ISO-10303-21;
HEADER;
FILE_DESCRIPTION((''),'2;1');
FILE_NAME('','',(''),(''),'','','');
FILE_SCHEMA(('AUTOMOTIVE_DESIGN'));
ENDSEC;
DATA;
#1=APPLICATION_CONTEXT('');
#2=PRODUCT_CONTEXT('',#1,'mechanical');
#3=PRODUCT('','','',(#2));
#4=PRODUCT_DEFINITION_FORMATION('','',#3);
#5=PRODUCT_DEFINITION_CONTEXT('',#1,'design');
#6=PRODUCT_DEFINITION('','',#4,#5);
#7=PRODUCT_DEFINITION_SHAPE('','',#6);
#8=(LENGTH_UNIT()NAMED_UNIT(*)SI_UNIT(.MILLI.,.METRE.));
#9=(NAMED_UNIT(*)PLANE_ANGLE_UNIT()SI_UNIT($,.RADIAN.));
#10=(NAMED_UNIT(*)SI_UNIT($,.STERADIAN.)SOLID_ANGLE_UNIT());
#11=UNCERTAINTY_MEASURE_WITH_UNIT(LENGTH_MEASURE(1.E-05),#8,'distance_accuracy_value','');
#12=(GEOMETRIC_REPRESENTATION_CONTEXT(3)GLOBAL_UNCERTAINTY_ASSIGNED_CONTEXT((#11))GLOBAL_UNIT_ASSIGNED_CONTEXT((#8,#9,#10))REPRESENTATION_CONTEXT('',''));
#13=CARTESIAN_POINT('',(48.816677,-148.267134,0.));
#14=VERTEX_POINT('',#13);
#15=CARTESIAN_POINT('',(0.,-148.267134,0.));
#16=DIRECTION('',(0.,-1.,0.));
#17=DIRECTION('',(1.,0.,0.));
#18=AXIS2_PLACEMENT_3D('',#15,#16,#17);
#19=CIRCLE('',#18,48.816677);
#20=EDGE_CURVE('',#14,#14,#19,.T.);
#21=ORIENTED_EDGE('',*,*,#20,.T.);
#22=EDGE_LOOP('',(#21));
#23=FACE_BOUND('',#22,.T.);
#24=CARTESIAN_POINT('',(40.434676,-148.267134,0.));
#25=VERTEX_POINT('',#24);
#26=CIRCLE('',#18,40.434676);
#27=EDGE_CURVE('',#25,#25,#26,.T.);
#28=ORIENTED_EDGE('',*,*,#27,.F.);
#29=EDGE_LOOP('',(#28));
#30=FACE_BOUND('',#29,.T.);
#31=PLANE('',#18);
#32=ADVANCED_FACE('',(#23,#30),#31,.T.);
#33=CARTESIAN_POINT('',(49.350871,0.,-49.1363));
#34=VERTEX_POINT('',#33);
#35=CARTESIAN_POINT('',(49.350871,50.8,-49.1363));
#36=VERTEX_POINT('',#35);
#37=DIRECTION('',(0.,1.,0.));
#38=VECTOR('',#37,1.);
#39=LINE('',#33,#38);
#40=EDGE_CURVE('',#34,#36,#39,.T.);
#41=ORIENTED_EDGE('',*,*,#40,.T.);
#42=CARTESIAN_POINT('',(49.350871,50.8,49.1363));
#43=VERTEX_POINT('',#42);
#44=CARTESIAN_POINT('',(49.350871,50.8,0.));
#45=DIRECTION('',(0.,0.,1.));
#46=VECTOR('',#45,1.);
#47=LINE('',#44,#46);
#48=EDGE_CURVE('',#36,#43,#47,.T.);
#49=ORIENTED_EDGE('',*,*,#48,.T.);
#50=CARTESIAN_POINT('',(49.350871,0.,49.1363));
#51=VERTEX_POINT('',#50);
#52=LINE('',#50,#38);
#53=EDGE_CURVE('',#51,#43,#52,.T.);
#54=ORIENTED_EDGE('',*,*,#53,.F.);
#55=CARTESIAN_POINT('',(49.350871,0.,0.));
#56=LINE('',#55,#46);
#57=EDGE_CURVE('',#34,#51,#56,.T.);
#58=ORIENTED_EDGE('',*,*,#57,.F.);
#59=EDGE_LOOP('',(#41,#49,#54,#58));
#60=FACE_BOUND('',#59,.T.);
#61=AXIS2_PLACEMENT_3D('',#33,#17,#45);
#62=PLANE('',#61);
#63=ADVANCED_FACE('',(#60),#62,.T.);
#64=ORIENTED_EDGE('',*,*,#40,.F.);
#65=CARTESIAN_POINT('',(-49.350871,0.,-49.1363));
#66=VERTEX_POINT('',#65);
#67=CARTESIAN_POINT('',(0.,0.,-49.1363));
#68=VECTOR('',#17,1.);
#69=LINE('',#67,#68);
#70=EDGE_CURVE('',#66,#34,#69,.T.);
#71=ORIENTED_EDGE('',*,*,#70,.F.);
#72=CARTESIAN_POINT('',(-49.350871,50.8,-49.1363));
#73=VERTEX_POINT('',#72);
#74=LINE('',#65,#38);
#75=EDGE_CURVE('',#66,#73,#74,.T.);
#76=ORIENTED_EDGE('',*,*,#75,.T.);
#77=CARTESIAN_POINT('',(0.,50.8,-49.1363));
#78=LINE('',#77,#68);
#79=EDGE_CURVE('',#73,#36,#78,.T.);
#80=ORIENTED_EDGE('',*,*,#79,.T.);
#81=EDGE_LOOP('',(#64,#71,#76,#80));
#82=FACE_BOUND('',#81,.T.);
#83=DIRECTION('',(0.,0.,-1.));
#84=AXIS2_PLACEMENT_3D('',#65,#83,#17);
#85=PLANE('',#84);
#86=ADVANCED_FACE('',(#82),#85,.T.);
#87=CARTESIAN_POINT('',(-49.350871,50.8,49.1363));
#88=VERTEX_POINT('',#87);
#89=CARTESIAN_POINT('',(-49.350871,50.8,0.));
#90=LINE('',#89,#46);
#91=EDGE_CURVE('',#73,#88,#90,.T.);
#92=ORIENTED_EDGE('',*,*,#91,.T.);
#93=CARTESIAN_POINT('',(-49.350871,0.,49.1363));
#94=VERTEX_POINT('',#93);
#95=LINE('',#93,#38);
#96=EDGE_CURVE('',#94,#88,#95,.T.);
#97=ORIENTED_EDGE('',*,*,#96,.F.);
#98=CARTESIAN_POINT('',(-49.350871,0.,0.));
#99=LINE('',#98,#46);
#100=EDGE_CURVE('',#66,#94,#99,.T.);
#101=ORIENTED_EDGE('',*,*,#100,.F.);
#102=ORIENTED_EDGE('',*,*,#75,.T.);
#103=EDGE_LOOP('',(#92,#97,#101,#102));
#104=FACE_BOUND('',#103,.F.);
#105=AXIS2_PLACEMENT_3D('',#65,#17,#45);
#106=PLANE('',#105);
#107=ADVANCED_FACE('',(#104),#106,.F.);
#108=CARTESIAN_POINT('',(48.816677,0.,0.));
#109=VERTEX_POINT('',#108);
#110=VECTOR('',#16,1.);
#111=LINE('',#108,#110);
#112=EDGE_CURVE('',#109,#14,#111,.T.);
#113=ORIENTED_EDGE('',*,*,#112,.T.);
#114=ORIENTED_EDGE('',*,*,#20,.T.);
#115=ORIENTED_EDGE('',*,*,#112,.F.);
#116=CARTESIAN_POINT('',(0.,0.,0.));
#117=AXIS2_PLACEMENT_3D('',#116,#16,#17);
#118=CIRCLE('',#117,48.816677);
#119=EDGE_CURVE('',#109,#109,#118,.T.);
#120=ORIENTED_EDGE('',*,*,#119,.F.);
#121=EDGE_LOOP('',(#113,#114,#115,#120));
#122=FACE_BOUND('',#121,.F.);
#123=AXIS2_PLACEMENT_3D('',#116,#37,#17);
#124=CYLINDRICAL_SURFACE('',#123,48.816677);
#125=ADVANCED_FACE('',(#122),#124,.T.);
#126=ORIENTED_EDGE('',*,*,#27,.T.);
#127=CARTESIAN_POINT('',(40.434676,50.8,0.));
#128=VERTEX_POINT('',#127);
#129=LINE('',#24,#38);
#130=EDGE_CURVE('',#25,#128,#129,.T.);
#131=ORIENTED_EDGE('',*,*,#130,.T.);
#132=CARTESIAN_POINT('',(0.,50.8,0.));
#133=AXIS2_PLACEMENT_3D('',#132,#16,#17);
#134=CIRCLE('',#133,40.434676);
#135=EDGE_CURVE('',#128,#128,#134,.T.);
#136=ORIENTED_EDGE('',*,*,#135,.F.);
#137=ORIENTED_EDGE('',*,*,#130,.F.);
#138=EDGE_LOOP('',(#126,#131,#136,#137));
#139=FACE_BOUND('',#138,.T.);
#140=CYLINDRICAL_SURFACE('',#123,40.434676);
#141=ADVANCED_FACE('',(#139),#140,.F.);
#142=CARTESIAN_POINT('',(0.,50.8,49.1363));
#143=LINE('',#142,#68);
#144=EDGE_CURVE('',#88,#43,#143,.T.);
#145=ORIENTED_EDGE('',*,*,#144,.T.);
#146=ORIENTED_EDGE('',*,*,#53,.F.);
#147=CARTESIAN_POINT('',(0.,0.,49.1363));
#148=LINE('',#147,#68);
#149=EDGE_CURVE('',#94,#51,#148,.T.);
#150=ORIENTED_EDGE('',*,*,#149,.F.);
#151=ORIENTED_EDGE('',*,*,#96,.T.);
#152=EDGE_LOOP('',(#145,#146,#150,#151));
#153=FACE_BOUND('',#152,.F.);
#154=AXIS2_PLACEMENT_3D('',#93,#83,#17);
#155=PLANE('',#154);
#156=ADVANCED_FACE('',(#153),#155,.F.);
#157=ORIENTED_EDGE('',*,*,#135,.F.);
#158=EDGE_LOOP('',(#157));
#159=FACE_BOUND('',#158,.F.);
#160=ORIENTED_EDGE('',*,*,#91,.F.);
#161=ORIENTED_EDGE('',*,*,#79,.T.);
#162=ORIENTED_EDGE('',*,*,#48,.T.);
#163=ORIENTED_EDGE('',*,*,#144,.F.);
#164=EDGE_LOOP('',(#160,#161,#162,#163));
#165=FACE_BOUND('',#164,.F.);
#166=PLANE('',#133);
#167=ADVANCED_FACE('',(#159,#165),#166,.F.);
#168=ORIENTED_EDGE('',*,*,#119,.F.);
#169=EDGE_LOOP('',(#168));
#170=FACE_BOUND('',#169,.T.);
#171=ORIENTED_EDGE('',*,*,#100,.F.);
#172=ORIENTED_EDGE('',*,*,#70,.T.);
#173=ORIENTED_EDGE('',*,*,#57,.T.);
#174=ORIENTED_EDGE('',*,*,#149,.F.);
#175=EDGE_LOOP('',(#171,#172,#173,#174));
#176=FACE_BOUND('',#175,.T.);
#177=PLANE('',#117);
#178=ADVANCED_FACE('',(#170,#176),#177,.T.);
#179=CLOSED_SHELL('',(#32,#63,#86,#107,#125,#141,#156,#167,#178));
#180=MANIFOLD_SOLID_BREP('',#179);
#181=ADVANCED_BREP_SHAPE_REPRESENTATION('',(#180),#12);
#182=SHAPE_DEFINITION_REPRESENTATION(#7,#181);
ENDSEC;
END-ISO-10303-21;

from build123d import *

# Parameters (mm, degrees)
F0_W     = 98.7017413428
F0_H     = 98.2726
F0_R     = 40.4346760416
F1_DEPTH = 50.8
F2_R     = 48.8166771829
F2_R_2   = 40.4346760416
F3_DEPTH = 148.2671336


# Not quite as in the source:
# - an extrude ends at something that could not be found from the text; its depth is read off the source's solid


with BuildPart() as f1:
    # F0 (on Front) → F1 (new body)
    with BuildSketch(Plane.XZ):
        Rectangle(F0_W, F0_H)
        Circle(F0_R, mode=Mode.SUBTRACT)
    extrude(amount=-F1_DEPTH)

    # F2 (on face) → F3 (join, through all)
    with BuildSketch(Plane.XZ):
        Circle(F2_R)
        Circle(F2_R_2, mode=Mode.SUBTRACT)
    extrude(amount=F3_DEPTH)


solid = f1.part
